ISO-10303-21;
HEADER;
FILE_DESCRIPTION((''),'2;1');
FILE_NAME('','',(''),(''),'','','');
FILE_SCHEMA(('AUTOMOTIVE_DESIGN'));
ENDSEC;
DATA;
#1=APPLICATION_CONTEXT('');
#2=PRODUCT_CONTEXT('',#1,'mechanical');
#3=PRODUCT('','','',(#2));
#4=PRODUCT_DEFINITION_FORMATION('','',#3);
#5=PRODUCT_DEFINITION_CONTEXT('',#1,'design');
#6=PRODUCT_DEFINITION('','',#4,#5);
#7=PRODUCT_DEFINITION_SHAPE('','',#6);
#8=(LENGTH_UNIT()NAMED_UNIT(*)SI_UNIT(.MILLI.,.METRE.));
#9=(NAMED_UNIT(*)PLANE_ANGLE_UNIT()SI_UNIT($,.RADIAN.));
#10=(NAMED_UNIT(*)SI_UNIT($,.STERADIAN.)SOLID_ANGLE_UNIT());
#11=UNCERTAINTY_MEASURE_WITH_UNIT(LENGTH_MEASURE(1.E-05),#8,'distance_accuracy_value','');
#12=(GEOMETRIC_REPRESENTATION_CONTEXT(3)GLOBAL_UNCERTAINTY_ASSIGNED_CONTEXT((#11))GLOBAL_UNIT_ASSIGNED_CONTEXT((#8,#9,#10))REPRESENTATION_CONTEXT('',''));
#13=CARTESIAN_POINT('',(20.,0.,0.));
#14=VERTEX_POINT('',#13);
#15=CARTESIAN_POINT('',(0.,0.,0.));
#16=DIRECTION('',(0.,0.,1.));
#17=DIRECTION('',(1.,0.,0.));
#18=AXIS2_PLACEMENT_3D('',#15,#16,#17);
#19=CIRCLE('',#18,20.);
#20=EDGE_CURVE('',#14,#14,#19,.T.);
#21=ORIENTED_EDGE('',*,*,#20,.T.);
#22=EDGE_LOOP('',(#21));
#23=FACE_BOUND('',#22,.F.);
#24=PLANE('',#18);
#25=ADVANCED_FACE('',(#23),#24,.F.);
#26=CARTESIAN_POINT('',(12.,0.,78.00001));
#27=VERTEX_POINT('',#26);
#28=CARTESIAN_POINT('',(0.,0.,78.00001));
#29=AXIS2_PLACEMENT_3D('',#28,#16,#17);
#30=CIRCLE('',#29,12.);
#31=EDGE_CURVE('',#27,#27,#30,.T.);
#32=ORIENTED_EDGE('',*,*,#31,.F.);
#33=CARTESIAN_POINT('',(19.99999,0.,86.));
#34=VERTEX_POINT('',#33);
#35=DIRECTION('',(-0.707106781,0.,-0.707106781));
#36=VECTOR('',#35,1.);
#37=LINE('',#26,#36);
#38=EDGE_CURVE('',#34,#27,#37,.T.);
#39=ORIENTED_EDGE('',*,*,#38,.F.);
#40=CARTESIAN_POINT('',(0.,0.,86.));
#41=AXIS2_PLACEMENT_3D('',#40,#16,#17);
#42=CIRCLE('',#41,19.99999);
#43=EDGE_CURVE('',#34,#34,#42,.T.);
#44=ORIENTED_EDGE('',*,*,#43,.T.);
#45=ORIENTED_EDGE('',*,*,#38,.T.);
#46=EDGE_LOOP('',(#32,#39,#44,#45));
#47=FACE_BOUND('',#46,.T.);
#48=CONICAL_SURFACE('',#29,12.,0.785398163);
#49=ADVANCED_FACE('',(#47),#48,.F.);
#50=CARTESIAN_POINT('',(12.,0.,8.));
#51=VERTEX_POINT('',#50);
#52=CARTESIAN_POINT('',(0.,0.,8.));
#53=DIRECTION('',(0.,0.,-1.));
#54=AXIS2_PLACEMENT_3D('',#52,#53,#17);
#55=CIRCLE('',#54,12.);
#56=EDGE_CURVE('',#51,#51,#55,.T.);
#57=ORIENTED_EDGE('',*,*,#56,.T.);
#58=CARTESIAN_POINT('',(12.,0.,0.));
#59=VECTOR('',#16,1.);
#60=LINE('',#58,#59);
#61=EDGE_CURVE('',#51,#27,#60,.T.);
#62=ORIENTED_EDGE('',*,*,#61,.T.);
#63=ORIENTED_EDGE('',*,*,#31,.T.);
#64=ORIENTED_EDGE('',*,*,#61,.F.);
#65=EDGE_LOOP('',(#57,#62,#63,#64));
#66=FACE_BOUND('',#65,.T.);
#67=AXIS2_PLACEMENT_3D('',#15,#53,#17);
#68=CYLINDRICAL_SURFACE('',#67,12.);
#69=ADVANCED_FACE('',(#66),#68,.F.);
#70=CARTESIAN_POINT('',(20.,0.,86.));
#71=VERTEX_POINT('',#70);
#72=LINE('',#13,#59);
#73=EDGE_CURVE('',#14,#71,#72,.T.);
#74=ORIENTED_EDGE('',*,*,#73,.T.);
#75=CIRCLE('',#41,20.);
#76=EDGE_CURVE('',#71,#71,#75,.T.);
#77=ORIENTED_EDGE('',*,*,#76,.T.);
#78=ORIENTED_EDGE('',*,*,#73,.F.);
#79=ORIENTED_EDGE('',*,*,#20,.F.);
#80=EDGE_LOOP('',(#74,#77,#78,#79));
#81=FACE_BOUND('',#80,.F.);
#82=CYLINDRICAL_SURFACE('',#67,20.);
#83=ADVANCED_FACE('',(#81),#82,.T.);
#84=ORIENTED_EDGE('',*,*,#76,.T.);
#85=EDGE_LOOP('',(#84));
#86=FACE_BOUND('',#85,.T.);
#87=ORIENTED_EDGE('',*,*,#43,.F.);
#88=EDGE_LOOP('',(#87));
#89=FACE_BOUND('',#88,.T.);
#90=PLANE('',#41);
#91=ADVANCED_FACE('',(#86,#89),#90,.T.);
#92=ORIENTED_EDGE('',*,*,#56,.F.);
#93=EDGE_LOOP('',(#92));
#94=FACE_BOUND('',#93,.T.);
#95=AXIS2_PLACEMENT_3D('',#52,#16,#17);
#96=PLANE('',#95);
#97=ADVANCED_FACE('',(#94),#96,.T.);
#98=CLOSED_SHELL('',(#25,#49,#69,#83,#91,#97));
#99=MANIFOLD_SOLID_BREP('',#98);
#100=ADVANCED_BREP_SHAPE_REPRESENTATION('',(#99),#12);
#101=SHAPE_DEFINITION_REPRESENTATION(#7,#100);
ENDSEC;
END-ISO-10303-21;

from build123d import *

# Parameters (mm, degrees)
F0_R     = 20
F1_DEPTH = 86
F2_T     = -8
F3_SIZE  = 7.99999


# Not quite as in the source:
# - a fillet or chamfer is up to 0.001 mm smaller than in the source, because OpenCascade refuses the exact size


with BuildPart() as f1:
    # F0 (on Top) → F1 (new body)
    with BuildSketch(Plane.XY):
        Circle(F0_R)
    extrude(amount=F1_DEPTH)

    # F2
    f2_openings = [f1.faces().sort_by_distance(p)[0] for p in [
        (0, 0, 86),
    ]]
    offset(amount=F2_T, openings=f2_openings)

    # F3 (size 8 in the source; OpenCascade refuses exactly that, so slightly less here)
    f3_edges = [f1.edges().sort_by_distance(p)[0] for p in [
        (-12, 0, 86),
    ]]
    chamfer(f3_edges, length=F3_SIZE)


solid = f1.part
